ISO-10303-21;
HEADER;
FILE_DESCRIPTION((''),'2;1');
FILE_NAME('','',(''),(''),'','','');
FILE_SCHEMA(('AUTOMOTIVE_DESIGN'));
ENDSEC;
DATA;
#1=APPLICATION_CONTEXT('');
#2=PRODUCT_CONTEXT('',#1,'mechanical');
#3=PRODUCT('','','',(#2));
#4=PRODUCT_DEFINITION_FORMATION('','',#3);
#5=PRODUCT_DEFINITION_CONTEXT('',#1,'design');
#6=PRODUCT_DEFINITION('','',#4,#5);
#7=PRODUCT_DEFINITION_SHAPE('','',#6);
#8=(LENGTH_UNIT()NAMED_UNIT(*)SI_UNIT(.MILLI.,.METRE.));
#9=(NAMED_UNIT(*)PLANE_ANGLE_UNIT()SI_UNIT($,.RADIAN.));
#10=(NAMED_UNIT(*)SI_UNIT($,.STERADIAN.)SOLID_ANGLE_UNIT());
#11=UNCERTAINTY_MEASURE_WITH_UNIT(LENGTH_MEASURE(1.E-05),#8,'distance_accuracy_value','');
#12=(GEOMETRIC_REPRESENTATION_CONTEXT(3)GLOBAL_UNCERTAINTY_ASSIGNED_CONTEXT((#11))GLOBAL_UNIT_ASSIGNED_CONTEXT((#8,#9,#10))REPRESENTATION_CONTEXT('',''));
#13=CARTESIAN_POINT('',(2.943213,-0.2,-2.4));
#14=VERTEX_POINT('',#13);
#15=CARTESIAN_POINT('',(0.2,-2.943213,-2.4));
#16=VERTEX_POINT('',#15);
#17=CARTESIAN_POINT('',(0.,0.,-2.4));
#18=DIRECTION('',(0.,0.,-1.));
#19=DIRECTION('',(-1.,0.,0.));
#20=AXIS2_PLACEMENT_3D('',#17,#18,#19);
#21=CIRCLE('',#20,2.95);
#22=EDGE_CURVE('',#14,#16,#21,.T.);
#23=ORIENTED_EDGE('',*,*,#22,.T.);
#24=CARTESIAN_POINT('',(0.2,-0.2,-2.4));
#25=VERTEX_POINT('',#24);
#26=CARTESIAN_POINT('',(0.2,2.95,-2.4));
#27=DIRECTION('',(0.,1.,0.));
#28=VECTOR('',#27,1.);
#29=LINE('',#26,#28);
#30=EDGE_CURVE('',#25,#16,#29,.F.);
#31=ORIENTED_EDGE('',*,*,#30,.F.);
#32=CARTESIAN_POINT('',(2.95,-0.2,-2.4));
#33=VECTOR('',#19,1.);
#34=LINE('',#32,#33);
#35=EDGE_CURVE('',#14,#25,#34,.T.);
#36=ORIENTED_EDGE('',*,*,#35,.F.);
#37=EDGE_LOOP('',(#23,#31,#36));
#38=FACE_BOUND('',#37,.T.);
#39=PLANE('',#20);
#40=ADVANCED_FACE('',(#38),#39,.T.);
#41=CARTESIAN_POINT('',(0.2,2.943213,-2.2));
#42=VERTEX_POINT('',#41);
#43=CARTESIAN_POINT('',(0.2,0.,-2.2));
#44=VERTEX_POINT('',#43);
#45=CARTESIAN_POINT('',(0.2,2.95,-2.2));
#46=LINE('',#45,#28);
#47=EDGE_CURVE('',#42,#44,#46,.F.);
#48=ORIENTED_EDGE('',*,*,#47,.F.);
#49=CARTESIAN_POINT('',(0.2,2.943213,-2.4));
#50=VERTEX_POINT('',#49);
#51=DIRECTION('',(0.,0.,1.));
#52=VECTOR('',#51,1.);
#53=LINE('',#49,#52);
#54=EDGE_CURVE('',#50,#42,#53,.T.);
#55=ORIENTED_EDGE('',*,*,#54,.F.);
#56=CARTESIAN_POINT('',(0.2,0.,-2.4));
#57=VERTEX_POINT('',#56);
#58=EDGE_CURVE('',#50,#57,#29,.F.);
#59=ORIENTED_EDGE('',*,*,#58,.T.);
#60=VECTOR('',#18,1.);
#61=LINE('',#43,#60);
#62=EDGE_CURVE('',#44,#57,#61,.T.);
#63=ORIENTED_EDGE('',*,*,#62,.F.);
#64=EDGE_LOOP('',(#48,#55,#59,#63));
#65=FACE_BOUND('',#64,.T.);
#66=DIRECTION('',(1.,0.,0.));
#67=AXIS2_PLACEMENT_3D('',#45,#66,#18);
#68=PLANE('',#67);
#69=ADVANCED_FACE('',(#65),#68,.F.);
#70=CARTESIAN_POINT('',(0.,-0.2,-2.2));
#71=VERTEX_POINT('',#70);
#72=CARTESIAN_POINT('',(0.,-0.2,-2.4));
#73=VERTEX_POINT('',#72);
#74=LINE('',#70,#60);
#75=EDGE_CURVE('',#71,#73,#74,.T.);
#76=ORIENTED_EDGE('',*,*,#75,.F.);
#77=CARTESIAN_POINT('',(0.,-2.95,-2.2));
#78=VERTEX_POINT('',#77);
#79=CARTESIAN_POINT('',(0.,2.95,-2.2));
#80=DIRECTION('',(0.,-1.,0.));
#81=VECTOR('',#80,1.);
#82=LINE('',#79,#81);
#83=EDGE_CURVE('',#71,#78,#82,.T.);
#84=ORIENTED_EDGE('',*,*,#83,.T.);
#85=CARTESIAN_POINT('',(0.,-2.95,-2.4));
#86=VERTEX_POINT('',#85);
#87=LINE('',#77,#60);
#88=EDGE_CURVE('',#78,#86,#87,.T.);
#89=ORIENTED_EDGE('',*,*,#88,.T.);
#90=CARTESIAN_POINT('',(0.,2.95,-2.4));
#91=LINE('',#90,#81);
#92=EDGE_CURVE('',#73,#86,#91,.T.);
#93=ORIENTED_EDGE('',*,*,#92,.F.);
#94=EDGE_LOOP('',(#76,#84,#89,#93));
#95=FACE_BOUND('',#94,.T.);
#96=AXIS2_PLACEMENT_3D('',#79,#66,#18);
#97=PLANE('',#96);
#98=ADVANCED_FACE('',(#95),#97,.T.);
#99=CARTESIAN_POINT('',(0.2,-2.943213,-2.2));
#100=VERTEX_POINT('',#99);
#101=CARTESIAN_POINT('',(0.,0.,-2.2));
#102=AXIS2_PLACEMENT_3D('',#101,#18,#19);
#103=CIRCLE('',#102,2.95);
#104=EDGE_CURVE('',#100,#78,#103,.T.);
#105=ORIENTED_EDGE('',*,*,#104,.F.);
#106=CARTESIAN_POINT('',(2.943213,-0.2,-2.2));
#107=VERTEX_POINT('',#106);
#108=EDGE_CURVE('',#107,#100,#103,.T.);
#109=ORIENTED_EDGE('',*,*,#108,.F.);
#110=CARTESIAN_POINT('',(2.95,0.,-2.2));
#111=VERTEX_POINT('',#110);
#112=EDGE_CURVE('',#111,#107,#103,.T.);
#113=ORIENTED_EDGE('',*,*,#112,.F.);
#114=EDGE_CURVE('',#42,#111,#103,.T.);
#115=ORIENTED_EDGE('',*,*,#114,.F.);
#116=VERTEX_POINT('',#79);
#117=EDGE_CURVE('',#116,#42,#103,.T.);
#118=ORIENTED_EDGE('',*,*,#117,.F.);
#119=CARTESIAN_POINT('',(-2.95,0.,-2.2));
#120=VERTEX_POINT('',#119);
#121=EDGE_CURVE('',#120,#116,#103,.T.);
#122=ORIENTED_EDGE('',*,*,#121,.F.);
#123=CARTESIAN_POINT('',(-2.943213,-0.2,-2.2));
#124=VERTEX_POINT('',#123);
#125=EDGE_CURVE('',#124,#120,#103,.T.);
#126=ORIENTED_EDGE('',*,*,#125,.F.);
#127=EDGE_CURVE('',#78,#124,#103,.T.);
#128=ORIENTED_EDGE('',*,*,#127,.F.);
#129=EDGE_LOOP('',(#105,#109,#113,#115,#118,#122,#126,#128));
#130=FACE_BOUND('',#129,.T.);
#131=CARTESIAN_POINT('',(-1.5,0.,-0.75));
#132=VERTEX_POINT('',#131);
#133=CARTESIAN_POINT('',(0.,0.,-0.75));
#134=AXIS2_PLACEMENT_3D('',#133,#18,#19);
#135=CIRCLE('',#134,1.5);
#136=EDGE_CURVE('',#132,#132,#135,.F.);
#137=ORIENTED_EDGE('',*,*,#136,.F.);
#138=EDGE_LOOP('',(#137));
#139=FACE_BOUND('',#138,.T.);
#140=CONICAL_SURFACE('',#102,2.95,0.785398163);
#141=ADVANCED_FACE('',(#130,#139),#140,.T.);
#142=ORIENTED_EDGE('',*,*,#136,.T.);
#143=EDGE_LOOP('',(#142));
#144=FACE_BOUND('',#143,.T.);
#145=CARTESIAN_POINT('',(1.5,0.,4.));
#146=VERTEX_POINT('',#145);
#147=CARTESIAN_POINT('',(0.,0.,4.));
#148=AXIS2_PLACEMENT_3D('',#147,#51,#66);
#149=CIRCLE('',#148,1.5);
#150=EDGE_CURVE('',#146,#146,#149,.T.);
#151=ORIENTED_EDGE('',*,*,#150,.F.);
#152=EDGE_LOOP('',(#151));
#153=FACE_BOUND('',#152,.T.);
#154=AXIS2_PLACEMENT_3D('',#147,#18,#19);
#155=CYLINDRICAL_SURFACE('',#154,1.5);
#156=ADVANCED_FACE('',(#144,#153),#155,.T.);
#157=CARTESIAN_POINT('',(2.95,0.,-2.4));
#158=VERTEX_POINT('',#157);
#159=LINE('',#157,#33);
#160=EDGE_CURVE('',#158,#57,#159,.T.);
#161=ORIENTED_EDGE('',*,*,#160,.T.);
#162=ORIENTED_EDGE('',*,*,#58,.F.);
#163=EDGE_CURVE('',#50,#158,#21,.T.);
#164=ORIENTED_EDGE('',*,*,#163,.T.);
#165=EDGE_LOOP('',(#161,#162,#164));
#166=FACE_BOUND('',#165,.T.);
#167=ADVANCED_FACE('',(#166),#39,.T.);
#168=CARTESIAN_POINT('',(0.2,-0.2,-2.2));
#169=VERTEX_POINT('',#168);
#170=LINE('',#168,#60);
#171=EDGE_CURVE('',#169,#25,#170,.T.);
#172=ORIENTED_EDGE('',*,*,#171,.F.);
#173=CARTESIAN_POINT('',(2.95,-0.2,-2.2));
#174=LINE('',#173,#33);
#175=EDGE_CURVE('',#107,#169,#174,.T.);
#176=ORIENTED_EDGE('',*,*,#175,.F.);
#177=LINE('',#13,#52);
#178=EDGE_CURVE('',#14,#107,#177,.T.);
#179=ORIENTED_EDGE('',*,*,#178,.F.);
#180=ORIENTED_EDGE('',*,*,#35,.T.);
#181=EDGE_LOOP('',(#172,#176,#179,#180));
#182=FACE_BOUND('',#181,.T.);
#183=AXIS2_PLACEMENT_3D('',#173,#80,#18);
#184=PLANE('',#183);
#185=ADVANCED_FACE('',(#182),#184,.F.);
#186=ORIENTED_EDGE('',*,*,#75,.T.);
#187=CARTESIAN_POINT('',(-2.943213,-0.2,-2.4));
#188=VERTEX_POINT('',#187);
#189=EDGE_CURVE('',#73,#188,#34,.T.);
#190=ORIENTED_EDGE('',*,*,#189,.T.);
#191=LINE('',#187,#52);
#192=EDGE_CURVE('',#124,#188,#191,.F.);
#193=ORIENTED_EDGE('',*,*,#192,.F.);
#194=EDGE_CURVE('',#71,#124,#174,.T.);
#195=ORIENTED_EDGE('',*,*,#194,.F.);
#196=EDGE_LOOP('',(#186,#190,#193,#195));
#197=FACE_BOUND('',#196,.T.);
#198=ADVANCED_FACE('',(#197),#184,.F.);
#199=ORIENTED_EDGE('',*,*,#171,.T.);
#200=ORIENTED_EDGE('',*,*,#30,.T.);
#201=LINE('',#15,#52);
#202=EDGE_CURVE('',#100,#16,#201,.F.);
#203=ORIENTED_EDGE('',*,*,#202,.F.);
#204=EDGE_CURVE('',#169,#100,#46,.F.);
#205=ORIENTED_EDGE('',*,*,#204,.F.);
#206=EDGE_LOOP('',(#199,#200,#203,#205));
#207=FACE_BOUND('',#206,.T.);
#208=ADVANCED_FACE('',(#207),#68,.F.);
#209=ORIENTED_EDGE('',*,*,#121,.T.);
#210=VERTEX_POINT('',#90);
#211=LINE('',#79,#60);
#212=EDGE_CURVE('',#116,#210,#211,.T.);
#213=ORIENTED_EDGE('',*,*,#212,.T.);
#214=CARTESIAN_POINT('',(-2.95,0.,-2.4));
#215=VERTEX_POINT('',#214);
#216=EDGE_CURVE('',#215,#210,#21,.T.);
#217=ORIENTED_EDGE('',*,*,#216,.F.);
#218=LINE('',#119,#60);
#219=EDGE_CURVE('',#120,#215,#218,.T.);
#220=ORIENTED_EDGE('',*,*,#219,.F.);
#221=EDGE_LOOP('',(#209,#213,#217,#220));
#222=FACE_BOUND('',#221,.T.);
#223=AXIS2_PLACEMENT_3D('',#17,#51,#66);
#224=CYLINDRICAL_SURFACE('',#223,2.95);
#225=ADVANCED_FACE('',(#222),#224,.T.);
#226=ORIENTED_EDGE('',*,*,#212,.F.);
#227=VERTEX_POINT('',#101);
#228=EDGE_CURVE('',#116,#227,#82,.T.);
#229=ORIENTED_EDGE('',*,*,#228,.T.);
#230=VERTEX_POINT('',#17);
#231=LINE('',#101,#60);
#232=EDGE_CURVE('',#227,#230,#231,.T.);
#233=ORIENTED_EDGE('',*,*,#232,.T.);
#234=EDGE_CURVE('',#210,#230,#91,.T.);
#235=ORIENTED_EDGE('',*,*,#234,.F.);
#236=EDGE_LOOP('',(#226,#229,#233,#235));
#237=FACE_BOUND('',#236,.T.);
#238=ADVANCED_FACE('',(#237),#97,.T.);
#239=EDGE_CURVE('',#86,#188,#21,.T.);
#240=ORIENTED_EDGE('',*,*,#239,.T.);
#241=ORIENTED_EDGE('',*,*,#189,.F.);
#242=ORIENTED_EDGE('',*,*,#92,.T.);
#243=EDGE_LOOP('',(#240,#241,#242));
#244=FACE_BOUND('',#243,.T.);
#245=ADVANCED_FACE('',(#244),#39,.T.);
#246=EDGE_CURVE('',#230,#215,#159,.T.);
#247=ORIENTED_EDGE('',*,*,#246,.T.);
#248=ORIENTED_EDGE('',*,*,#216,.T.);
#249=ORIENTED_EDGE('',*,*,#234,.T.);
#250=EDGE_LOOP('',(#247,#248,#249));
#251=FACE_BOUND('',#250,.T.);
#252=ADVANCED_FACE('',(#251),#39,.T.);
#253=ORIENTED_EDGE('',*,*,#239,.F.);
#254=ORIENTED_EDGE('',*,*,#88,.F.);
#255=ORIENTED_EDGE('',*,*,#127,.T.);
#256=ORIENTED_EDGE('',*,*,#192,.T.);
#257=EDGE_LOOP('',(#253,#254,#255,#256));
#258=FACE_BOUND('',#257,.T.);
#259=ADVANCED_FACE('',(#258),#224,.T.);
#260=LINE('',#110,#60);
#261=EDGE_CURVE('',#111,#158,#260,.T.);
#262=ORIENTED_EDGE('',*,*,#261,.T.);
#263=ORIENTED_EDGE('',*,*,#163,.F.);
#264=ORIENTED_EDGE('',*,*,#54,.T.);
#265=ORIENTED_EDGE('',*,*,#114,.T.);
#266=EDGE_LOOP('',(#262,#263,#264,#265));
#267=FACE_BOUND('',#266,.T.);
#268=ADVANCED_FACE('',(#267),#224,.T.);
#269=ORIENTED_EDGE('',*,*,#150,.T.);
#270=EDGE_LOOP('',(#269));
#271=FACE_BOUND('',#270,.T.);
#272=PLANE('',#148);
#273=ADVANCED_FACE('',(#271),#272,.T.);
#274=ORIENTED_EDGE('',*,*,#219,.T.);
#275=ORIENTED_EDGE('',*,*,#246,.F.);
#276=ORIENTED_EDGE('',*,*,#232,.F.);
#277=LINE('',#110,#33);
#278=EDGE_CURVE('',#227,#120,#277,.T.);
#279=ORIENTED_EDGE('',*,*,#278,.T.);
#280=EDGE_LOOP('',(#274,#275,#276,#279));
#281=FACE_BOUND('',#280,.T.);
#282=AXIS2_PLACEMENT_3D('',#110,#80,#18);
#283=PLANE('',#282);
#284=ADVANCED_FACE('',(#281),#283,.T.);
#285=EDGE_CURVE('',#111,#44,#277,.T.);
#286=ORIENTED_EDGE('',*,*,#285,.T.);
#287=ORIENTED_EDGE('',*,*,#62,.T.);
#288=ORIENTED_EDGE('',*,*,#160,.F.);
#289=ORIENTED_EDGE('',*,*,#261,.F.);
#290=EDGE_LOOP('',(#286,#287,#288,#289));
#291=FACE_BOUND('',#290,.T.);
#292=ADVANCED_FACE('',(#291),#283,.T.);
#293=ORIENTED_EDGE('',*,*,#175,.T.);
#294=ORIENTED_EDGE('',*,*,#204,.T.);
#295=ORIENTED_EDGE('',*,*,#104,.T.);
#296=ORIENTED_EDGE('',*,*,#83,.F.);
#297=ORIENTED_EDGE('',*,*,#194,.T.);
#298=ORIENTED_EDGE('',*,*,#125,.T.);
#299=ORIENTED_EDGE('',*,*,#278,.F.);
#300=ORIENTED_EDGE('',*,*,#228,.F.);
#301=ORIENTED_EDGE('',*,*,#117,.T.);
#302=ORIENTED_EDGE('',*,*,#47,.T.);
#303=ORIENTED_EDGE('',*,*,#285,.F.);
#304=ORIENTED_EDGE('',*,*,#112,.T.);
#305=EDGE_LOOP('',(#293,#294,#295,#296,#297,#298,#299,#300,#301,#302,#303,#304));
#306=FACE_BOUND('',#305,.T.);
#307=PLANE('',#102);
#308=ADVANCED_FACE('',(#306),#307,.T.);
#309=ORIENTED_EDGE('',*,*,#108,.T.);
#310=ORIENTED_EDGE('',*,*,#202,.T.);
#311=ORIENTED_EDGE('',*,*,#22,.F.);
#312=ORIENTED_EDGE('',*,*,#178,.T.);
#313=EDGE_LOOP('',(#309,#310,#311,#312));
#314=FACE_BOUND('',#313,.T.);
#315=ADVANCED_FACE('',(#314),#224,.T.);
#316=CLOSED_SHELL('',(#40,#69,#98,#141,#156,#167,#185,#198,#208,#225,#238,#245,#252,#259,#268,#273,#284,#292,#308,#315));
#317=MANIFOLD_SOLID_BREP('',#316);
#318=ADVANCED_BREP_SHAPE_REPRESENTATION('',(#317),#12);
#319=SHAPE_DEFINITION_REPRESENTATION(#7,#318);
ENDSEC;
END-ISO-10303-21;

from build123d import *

# Parameters (mm, degrees)
ESQUISSE1_R                     = 1.5
BOSS_EXTRU_1_DEPTH              = 4
ESQUISSE2_R                     = 2.95
BOSS_EXTRU_2_DEPTH              = 2.4
CHANFREIN1_SIZE                 = 2.2
ESQUISSE4_W                     = 0.2
ESQUISSE4_H                     = 5.9
ESQUISSE4_W_2                   = 5.9
ESQUISSE4_H_2                   = 0.2
ENL_V_DE_MAT_EXTRU_MINCE1_DEPTH = 0.2


with BuildPart() as part:
    # Esquisse1 → Boss.-Extru.1 (new body)
    with BuildSketch(Plane.XY):
        Circle(ESQUISSE1_R)
    extrude(amount=BOSS_EXTRU_1_DEPTH)

    # Esquisse2 → Boss.-Extru.2 (add)
    with BuildSketch(Plane(origin=(0, 0, 0), x_dir=(-1, 0, 0), z_dir=(0, 0, -1))):
        Circle(ESQUISSE2_R)
    extrude(amount=BOSS_EXTRU_2_DEPTH)

    # Chanfrein1
    # the kernel refuses this chamfer: 2.2 mm, written as the material it takes off along each edge
    with BuildSketch(Plane(origin=(0, 0, 0), x_dir=(-1, 0, 0), z_dir=(0, -1, 0))) as chanfrein1_piece_1_section:
        Polygon((2.95, CHANFREIN1_SIZE), (2.95 - CHANFREIN1_SIZE, 0), (2.95, 0), align=None)
    chanfrein1_piece_1 = revolve(axis=Axis((0, 0, 0), (0, 0, -1)), mode=Mode.PRIVATE)
    chanfrein1_piece_1 = chanfrein1_piece_1 - Plane(origin=(0, 0, -1.483070645), x_dir=(1, 0, 0), z_dir=(0, 0, -1)) * Cylinder(1.5, 12, mode=Mode.PRIVATE)
    add(chanfrein1_piece_1, mode=Mode.SUBTRACT)

    # Esquisse4 → Enlèv. de mat.-Extru.-Mince1 (cut)
    with BuildSketch(Plane(origin=(0, 0, -2.4), x_dir=(-1, 0, 0), z_dir=(0, 0, -1))):
        with Locations((-0.1, 0)):
            Rectangle(ESQUISSE4_W, ESQUISSE4_H)
        with Locations((0, -0.1)):
            Rectangle(ESQUISSE4_W_2, ESQUISSE4_H_2)
    extrude(amount=-ENL_V_DE_MAT_EXTRU_MINCE1_DEPTH, mode=Mode.SUBTRACT)


solid = part.part
